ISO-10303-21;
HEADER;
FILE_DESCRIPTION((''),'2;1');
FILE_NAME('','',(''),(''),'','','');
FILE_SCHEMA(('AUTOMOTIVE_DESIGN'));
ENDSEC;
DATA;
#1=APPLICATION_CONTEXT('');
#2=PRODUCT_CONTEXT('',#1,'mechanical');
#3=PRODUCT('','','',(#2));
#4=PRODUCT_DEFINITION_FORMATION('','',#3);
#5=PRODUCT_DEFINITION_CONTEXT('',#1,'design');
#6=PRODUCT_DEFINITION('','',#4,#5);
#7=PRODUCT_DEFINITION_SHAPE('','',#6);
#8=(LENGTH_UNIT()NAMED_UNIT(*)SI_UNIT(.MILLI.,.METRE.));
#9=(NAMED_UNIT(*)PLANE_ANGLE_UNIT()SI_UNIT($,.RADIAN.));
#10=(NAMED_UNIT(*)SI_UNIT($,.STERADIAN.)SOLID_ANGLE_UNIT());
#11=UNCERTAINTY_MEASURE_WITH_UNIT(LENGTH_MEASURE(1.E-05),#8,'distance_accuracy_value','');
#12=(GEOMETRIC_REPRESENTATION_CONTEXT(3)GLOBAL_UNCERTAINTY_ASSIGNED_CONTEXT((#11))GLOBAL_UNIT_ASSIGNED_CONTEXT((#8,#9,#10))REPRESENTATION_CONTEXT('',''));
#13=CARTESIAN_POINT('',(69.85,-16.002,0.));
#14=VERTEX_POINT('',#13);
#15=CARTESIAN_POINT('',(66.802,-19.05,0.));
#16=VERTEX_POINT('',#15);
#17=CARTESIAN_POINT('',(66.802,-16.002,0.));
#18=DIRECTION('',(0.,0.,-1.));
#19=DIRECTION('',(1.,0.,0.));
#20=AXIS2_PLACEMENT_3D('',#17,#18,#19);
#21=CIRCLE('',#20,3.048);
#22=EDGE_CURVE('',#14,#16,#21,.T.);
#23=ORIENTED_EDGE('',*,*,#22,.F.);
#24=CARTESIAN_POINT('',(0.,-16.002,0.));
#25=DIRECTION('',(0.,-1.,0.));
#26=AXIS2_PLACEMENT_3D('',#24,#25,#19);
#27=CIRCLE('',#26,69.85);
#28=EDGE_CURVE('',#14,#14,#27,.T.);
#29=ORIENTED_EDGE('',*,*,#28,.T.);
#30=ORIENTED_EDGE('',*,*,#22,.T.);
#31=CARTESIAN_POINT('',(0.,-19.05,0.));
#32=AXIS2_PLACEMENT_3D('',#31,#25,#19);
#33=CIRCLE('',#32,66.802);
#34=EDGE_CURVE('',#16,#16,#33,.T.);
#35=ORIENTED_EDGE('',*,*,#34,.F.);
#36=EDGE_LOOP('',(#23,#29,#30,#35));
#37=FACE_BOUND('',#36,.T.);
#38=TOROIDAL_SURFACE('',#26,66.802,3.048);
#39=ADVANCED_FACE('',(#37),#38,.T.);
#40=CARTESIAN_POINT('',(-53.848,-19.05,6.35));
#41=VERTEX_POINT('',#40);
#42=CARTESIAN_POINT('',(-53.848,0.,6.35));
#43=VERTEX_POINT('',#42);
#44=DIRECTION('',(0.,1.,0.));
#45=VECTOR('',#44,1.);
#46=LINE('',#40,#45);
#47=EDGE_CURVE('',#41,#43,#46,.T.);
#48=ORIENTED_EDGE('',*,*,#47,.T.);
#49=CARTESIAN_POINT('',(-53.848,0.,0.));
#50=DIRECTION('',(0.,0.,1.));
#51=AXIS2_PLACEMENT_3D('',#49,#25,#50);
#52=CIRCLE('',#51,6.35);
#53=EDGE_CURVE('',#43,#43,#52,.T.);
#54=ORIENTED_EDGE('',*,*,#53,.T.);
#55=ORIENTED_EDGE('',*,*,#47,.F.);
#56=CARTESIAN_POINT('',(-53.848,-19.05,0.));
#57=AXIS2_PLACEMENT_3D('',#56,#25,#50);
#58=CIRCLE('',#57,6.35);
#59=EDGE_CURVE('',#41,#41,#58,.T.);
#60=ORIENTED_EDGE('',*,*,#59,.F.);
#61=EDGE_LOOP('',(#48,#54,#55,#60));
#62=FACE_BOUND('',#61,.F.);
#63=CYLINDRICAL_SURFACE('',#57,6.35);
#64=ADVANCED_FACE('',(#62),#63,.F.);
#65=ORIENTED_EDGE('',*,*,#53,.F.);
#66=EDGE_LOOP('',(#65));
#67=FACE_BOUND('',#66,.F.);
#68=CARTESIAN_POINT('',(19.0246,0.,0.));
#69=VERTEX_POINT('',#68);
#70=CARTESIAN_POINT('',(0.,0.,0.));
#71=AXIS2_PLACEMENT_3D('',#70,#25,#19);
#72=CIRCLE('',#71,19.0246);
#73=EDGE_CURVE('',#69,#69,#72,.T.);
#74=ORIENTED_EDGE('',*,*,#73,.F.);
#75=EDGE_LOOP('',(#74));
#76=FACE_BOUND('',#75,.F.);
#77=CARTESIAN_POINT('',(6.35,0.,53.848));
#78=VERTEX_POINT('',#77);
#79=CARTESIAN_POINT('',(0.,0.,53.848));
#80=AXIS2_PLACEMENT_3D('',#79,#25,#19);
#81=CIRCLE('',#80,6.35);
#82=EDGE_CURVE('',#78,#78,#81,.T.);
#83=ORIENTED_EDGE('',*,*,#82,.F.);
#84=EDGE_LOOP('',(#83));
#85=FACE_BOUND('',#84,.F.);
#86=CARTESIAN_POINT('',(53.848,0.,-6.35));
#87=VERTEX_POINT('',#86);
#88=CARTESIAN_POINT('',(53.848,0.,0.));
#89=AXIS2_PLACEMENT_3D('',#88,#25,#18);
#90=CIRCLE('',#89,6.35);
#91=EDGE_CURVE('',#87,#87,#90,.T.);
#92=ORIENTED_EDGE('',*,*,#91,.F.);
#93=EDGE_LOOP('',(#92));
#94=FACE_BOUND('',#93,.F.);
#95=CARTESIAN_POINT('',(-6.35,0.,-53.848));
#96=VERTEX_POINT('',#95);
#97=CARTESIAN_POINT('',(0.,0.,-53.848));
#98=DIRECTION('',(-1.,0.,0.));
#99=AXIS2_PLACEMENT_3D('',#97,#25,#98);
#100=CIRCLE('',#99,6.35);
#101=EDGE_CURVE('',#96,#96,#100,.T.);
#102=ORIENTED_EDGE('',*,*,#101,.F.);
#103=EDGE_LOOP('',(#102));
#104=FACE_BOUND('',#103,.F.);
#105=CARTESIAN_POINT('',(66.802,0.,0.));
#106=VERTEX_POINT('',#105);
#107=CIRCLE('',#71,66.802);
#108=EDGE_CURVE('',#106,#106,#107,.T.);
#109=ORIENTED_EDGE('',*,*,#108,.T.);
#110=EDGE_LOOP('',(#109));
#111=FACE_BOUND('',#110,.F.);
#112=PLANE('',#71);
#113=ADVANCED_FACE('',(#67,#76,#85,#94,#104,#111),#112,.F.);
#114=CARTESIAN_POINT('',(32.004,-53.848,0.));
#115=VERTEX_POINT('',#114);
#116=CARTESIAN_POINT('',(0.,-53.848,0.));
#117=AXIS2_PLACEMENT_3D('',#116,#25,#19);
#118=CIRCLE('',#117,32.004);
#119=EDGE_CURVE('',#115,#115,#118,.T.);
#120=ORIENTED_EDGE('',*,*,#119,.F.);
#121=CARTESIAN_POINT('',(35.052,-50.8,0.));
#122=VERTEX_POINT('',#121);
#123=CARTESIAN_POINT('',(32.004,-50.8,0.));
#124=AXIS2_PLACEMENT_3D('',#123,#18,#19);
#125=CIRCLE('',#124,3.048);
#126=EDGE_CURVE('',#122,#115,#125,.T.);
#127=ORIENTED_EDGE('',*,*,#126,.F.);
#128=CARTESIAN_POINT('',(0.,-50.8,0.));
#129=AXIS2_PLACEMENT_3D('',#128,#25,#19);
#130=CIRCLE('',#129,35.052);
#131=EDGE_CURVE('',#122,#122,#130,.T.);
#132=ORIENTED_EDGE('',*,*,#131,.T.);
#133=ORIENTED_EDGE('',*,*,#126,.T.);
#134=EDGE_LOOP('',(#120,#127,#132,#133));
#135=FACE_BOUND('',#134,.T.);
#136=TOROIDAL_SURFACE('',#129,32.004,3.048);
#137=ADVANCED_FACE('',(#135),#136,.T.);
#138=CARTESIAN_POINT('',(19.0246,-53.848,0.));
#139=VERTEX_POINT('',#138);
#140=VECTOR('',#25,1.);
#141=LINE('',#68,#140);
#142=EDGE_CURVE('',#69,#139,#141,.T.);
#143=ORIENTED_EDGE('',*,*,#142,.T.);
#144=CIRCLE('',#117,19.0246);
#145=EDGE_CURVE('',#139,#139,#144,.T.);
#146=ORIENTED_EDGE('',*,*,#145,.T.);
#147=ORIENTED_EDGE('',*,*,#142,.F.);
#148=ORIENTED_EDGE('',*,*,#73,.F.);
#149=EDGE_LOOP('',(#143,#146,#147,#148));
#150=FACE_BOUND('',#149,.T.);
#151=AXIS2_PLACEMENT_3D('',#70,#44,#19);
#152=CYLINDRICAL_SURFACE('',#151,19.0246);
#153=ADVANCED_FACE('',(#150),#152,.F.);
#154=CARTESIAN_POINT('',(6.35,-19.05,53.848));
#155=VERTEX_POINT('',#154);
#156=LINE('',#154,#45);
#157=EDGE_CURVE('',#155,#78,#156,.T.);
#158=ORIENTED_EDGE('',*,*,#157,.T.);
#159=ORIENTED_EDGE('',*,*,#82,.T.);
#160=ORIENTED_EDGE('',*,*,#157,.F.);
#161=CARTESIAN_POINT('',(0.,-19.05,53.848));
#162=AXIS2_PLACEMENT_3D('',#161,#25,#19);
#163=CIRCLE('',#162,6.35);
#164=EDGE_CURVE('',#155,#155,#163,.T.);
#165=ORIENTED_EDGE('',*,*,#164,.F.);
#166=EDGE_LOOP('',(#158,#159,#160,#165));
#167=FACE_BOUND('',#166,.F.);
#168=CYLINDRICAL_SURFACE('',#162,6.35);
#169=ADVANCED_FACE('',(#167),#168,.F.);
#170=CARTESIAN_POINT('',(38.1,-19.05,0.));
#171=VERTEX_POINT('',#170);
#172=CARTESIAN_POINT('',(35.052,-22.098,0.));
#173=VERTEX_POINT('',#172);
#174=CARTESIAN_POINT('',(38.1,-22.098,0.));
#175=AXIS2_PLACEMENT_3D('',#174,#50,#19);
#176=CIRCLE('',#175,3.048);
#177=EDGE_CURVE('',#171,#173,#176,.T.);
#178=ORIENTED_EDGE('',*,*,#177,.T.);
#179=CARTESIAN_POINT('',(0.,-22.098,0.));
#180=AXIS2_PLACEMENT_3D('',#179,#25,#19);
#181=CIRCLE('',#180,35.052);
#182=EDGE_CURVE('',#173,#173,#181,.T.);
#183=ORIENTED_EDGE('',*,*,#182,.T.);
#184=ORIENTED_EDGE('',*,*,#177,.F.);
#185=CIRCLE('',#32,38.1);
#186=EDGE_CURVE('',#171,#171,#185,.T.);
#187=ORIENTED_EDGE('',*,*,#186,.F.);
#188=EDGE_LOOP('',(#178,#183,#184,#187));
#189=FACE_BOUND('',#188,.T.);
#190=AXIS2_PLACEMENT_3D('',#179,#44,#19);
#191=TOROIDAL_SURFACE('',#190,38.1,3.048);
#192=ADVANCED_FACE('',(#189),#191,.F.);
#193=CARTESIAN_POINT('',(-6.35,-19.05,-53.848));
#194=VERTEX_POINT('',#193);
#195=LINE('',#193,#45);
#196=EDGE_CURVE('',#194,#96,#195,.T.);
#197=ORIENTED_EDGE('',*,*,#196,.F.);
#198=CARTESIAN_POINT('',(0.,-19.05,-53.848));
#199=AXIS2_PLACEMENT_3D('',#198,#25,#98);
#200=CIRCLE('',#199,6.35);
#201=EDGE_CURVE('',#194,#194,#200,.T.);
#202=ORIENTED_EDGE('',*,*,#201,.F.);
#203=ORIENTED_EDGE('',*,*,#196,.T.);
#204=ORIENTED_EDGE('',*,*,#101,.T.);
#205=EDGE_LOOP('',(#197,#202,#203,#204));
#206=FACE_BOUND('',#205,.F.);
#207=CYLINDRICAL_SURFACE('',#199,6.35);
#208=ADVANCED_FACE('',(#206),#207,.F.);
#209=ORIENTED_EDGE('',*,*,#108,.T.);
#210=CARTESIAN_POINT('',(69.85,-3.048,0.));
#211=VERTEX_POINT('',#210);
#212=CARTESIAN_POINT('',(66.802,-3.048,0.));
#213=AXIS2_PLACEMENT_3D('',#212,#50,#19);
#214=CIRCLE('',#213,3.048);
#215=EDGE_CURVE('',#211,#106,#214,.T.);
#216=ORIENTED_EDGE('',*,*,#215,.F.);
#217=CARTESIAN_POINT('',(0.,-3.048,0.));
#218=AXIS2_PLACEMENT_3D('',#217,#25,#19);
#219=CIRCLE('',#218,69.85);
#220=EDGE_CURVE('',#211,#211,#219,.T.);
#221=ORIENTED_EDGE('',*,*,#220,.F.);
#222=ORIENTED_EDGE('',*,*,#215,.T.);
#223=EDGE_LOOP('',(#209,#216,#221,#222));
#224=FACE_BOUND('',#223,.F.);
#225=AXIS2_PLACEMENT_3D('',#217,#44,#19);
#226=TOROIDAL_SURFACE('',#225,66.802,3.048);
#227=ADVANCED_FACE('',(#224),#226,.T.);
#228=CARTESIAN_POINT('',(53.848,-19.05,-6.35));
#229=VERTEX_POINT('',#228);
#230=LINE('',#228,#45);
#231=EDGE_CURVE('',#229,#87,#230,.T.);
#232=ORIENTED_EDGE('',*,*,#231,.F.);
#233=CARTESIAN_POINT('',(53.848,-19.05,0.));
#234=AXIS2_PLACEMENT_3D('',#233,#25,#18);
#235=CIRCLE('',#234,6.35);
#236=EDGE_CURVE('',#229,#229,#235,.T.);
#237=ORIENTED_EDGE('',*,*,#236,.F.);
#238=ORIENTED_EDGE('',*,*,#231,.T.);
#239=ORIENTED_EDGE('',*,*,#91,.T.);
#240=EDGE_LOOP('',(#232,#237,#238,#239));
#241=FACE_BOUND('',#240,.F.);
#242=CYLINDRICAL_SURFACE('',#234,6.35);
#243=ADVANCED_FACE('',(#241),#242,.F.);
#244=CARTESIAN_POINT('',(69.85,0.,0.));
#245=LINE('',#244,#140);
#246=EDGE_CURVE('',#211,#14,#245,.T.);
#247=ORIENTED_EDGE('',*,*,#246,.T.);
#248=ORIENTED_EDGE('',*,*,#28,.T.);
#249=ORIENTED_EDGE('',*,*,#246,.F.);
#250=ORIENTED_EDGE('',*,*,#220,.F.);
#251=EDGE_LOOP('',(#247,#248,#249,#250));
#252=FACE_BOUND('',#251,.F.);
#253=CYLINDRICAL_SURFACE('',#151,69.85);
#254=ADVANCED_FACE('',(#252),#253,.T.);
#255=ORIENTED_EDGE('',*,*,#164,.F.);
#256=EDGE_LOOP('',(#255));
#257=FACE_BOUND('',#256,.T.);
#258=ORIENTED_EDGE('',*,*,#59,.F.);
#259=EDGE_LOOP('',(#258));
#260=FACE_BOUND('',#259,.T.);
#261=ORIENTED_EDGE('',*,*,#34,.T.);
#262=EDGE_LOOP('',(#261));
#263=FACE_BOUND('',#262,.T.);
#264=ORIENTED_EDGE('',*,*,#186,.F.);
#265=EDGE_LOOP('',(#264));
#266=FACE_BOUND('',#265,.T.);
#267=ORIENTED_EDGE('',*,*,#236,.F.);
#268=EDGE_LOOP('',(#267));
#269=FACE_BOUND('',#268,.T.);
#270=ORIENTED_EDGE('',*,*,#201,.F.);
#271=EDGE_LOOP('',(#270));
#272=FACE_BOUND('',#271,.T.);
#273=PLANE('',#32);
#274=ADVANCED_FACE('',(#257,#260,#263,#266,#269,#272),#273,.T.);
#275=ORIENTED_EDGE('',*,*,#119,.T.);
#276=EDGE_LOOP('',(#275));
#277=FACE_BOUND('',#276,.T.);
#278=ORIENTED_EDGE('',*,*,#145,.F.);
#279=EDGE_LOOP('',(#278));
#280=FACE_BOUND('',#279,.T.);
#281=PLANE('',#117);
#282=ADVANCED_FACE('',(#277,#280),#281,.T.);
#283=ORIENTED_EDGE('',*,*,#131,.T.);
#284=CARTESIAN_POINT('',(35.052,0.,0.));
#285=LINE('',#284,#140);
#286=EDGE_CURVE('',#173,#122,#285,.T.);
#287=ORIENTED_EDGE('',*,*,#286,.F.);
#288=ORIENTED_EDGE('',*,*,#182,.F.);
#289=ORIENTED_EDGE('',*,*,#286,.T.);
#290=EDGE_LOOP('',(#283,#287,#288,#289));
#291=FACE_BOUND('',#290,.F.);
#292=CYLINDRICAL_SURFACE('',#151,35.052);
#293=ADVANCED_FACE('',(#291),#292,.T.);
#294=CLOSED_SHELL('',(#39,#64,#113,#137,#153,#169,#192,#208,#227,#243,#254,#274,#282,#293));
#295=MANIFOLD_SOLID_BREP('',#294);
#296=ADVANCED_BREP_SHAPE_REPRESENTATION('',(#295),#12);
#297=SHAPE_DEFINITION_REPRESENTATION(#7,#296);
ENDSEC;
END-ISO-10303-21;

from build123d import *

# Parameters (mm, degrees)
F0_R            = 35.052
F0_R_2          = 19.0246
F1_DEPTH        = 53.848
F0_R_3          = 69.85
F0_R_4          = 53.848
F2_DEPTH        = 19.05
F3_R            = 3.048
F4_R            = 6.35
F5_DEPTH        = 19.051
F5_COPIES_COUNT = 4


# Not quite as in the source:
# - a pattern or mirror of a feature is missing from the dataset's text; its kind, count and spacing are read off the source's solid
# - a feature names something its author has since deleted; it is built from what else it names


with BuildPart() as f1:
    # F0 (on Front) → F1 (new body)
    with BuildSketch(Plane.XZ):
        Circle(F0_R)
        Circle(F0_R_2, mode=Mode.SUBTRACT)
    extrude(amount=F1_DEPTH)

    # F0 (on Front) → F2 (join)
    with BuildSketch(Plane.XZ):
        Circle(F0_R_3)
        Circle(F0_R_4, mode=Mode.SUBTRACT)
        Circle(F0_R_4)
        Circle(F0_R, mode=Mode.SUBTRACT)
    extrude(amount=F2_DEPTH)

    # F3
    f3_edges = [f1.edges().sort_by_distance(p)[0] for p in [
        (-69.85, -19.05, 0),
        (-69.85, 0, 0),
        (-35.052, -19.05, 0),
        (-35.052, -53.848, 0),
    ]]
    fillet(f3_edges, radius=F3_R)

    # F4 (on face) → F5 (cut, through all)
    with BuildSketch(Plane.XZ.offset(19.05)):
        with Locations((0, 53.848)):
            Circle(F4_R)
    f5 = extrude(amount=-F5_DEPTH, mode=Mode.SUBTRACT)

    # F5_copies: F5 ×4 about axis
    f5_copies_axis = Axis((0, 0, 0), (0, 1, 0))
    for i in range(1, F5_COPIES_COUNT):
        add(f5.rotate(f5_copies_axis, i * 360 / F5_COPIES_COUNT), mode=Mode.SUBTRACT)


solid = f1.part
